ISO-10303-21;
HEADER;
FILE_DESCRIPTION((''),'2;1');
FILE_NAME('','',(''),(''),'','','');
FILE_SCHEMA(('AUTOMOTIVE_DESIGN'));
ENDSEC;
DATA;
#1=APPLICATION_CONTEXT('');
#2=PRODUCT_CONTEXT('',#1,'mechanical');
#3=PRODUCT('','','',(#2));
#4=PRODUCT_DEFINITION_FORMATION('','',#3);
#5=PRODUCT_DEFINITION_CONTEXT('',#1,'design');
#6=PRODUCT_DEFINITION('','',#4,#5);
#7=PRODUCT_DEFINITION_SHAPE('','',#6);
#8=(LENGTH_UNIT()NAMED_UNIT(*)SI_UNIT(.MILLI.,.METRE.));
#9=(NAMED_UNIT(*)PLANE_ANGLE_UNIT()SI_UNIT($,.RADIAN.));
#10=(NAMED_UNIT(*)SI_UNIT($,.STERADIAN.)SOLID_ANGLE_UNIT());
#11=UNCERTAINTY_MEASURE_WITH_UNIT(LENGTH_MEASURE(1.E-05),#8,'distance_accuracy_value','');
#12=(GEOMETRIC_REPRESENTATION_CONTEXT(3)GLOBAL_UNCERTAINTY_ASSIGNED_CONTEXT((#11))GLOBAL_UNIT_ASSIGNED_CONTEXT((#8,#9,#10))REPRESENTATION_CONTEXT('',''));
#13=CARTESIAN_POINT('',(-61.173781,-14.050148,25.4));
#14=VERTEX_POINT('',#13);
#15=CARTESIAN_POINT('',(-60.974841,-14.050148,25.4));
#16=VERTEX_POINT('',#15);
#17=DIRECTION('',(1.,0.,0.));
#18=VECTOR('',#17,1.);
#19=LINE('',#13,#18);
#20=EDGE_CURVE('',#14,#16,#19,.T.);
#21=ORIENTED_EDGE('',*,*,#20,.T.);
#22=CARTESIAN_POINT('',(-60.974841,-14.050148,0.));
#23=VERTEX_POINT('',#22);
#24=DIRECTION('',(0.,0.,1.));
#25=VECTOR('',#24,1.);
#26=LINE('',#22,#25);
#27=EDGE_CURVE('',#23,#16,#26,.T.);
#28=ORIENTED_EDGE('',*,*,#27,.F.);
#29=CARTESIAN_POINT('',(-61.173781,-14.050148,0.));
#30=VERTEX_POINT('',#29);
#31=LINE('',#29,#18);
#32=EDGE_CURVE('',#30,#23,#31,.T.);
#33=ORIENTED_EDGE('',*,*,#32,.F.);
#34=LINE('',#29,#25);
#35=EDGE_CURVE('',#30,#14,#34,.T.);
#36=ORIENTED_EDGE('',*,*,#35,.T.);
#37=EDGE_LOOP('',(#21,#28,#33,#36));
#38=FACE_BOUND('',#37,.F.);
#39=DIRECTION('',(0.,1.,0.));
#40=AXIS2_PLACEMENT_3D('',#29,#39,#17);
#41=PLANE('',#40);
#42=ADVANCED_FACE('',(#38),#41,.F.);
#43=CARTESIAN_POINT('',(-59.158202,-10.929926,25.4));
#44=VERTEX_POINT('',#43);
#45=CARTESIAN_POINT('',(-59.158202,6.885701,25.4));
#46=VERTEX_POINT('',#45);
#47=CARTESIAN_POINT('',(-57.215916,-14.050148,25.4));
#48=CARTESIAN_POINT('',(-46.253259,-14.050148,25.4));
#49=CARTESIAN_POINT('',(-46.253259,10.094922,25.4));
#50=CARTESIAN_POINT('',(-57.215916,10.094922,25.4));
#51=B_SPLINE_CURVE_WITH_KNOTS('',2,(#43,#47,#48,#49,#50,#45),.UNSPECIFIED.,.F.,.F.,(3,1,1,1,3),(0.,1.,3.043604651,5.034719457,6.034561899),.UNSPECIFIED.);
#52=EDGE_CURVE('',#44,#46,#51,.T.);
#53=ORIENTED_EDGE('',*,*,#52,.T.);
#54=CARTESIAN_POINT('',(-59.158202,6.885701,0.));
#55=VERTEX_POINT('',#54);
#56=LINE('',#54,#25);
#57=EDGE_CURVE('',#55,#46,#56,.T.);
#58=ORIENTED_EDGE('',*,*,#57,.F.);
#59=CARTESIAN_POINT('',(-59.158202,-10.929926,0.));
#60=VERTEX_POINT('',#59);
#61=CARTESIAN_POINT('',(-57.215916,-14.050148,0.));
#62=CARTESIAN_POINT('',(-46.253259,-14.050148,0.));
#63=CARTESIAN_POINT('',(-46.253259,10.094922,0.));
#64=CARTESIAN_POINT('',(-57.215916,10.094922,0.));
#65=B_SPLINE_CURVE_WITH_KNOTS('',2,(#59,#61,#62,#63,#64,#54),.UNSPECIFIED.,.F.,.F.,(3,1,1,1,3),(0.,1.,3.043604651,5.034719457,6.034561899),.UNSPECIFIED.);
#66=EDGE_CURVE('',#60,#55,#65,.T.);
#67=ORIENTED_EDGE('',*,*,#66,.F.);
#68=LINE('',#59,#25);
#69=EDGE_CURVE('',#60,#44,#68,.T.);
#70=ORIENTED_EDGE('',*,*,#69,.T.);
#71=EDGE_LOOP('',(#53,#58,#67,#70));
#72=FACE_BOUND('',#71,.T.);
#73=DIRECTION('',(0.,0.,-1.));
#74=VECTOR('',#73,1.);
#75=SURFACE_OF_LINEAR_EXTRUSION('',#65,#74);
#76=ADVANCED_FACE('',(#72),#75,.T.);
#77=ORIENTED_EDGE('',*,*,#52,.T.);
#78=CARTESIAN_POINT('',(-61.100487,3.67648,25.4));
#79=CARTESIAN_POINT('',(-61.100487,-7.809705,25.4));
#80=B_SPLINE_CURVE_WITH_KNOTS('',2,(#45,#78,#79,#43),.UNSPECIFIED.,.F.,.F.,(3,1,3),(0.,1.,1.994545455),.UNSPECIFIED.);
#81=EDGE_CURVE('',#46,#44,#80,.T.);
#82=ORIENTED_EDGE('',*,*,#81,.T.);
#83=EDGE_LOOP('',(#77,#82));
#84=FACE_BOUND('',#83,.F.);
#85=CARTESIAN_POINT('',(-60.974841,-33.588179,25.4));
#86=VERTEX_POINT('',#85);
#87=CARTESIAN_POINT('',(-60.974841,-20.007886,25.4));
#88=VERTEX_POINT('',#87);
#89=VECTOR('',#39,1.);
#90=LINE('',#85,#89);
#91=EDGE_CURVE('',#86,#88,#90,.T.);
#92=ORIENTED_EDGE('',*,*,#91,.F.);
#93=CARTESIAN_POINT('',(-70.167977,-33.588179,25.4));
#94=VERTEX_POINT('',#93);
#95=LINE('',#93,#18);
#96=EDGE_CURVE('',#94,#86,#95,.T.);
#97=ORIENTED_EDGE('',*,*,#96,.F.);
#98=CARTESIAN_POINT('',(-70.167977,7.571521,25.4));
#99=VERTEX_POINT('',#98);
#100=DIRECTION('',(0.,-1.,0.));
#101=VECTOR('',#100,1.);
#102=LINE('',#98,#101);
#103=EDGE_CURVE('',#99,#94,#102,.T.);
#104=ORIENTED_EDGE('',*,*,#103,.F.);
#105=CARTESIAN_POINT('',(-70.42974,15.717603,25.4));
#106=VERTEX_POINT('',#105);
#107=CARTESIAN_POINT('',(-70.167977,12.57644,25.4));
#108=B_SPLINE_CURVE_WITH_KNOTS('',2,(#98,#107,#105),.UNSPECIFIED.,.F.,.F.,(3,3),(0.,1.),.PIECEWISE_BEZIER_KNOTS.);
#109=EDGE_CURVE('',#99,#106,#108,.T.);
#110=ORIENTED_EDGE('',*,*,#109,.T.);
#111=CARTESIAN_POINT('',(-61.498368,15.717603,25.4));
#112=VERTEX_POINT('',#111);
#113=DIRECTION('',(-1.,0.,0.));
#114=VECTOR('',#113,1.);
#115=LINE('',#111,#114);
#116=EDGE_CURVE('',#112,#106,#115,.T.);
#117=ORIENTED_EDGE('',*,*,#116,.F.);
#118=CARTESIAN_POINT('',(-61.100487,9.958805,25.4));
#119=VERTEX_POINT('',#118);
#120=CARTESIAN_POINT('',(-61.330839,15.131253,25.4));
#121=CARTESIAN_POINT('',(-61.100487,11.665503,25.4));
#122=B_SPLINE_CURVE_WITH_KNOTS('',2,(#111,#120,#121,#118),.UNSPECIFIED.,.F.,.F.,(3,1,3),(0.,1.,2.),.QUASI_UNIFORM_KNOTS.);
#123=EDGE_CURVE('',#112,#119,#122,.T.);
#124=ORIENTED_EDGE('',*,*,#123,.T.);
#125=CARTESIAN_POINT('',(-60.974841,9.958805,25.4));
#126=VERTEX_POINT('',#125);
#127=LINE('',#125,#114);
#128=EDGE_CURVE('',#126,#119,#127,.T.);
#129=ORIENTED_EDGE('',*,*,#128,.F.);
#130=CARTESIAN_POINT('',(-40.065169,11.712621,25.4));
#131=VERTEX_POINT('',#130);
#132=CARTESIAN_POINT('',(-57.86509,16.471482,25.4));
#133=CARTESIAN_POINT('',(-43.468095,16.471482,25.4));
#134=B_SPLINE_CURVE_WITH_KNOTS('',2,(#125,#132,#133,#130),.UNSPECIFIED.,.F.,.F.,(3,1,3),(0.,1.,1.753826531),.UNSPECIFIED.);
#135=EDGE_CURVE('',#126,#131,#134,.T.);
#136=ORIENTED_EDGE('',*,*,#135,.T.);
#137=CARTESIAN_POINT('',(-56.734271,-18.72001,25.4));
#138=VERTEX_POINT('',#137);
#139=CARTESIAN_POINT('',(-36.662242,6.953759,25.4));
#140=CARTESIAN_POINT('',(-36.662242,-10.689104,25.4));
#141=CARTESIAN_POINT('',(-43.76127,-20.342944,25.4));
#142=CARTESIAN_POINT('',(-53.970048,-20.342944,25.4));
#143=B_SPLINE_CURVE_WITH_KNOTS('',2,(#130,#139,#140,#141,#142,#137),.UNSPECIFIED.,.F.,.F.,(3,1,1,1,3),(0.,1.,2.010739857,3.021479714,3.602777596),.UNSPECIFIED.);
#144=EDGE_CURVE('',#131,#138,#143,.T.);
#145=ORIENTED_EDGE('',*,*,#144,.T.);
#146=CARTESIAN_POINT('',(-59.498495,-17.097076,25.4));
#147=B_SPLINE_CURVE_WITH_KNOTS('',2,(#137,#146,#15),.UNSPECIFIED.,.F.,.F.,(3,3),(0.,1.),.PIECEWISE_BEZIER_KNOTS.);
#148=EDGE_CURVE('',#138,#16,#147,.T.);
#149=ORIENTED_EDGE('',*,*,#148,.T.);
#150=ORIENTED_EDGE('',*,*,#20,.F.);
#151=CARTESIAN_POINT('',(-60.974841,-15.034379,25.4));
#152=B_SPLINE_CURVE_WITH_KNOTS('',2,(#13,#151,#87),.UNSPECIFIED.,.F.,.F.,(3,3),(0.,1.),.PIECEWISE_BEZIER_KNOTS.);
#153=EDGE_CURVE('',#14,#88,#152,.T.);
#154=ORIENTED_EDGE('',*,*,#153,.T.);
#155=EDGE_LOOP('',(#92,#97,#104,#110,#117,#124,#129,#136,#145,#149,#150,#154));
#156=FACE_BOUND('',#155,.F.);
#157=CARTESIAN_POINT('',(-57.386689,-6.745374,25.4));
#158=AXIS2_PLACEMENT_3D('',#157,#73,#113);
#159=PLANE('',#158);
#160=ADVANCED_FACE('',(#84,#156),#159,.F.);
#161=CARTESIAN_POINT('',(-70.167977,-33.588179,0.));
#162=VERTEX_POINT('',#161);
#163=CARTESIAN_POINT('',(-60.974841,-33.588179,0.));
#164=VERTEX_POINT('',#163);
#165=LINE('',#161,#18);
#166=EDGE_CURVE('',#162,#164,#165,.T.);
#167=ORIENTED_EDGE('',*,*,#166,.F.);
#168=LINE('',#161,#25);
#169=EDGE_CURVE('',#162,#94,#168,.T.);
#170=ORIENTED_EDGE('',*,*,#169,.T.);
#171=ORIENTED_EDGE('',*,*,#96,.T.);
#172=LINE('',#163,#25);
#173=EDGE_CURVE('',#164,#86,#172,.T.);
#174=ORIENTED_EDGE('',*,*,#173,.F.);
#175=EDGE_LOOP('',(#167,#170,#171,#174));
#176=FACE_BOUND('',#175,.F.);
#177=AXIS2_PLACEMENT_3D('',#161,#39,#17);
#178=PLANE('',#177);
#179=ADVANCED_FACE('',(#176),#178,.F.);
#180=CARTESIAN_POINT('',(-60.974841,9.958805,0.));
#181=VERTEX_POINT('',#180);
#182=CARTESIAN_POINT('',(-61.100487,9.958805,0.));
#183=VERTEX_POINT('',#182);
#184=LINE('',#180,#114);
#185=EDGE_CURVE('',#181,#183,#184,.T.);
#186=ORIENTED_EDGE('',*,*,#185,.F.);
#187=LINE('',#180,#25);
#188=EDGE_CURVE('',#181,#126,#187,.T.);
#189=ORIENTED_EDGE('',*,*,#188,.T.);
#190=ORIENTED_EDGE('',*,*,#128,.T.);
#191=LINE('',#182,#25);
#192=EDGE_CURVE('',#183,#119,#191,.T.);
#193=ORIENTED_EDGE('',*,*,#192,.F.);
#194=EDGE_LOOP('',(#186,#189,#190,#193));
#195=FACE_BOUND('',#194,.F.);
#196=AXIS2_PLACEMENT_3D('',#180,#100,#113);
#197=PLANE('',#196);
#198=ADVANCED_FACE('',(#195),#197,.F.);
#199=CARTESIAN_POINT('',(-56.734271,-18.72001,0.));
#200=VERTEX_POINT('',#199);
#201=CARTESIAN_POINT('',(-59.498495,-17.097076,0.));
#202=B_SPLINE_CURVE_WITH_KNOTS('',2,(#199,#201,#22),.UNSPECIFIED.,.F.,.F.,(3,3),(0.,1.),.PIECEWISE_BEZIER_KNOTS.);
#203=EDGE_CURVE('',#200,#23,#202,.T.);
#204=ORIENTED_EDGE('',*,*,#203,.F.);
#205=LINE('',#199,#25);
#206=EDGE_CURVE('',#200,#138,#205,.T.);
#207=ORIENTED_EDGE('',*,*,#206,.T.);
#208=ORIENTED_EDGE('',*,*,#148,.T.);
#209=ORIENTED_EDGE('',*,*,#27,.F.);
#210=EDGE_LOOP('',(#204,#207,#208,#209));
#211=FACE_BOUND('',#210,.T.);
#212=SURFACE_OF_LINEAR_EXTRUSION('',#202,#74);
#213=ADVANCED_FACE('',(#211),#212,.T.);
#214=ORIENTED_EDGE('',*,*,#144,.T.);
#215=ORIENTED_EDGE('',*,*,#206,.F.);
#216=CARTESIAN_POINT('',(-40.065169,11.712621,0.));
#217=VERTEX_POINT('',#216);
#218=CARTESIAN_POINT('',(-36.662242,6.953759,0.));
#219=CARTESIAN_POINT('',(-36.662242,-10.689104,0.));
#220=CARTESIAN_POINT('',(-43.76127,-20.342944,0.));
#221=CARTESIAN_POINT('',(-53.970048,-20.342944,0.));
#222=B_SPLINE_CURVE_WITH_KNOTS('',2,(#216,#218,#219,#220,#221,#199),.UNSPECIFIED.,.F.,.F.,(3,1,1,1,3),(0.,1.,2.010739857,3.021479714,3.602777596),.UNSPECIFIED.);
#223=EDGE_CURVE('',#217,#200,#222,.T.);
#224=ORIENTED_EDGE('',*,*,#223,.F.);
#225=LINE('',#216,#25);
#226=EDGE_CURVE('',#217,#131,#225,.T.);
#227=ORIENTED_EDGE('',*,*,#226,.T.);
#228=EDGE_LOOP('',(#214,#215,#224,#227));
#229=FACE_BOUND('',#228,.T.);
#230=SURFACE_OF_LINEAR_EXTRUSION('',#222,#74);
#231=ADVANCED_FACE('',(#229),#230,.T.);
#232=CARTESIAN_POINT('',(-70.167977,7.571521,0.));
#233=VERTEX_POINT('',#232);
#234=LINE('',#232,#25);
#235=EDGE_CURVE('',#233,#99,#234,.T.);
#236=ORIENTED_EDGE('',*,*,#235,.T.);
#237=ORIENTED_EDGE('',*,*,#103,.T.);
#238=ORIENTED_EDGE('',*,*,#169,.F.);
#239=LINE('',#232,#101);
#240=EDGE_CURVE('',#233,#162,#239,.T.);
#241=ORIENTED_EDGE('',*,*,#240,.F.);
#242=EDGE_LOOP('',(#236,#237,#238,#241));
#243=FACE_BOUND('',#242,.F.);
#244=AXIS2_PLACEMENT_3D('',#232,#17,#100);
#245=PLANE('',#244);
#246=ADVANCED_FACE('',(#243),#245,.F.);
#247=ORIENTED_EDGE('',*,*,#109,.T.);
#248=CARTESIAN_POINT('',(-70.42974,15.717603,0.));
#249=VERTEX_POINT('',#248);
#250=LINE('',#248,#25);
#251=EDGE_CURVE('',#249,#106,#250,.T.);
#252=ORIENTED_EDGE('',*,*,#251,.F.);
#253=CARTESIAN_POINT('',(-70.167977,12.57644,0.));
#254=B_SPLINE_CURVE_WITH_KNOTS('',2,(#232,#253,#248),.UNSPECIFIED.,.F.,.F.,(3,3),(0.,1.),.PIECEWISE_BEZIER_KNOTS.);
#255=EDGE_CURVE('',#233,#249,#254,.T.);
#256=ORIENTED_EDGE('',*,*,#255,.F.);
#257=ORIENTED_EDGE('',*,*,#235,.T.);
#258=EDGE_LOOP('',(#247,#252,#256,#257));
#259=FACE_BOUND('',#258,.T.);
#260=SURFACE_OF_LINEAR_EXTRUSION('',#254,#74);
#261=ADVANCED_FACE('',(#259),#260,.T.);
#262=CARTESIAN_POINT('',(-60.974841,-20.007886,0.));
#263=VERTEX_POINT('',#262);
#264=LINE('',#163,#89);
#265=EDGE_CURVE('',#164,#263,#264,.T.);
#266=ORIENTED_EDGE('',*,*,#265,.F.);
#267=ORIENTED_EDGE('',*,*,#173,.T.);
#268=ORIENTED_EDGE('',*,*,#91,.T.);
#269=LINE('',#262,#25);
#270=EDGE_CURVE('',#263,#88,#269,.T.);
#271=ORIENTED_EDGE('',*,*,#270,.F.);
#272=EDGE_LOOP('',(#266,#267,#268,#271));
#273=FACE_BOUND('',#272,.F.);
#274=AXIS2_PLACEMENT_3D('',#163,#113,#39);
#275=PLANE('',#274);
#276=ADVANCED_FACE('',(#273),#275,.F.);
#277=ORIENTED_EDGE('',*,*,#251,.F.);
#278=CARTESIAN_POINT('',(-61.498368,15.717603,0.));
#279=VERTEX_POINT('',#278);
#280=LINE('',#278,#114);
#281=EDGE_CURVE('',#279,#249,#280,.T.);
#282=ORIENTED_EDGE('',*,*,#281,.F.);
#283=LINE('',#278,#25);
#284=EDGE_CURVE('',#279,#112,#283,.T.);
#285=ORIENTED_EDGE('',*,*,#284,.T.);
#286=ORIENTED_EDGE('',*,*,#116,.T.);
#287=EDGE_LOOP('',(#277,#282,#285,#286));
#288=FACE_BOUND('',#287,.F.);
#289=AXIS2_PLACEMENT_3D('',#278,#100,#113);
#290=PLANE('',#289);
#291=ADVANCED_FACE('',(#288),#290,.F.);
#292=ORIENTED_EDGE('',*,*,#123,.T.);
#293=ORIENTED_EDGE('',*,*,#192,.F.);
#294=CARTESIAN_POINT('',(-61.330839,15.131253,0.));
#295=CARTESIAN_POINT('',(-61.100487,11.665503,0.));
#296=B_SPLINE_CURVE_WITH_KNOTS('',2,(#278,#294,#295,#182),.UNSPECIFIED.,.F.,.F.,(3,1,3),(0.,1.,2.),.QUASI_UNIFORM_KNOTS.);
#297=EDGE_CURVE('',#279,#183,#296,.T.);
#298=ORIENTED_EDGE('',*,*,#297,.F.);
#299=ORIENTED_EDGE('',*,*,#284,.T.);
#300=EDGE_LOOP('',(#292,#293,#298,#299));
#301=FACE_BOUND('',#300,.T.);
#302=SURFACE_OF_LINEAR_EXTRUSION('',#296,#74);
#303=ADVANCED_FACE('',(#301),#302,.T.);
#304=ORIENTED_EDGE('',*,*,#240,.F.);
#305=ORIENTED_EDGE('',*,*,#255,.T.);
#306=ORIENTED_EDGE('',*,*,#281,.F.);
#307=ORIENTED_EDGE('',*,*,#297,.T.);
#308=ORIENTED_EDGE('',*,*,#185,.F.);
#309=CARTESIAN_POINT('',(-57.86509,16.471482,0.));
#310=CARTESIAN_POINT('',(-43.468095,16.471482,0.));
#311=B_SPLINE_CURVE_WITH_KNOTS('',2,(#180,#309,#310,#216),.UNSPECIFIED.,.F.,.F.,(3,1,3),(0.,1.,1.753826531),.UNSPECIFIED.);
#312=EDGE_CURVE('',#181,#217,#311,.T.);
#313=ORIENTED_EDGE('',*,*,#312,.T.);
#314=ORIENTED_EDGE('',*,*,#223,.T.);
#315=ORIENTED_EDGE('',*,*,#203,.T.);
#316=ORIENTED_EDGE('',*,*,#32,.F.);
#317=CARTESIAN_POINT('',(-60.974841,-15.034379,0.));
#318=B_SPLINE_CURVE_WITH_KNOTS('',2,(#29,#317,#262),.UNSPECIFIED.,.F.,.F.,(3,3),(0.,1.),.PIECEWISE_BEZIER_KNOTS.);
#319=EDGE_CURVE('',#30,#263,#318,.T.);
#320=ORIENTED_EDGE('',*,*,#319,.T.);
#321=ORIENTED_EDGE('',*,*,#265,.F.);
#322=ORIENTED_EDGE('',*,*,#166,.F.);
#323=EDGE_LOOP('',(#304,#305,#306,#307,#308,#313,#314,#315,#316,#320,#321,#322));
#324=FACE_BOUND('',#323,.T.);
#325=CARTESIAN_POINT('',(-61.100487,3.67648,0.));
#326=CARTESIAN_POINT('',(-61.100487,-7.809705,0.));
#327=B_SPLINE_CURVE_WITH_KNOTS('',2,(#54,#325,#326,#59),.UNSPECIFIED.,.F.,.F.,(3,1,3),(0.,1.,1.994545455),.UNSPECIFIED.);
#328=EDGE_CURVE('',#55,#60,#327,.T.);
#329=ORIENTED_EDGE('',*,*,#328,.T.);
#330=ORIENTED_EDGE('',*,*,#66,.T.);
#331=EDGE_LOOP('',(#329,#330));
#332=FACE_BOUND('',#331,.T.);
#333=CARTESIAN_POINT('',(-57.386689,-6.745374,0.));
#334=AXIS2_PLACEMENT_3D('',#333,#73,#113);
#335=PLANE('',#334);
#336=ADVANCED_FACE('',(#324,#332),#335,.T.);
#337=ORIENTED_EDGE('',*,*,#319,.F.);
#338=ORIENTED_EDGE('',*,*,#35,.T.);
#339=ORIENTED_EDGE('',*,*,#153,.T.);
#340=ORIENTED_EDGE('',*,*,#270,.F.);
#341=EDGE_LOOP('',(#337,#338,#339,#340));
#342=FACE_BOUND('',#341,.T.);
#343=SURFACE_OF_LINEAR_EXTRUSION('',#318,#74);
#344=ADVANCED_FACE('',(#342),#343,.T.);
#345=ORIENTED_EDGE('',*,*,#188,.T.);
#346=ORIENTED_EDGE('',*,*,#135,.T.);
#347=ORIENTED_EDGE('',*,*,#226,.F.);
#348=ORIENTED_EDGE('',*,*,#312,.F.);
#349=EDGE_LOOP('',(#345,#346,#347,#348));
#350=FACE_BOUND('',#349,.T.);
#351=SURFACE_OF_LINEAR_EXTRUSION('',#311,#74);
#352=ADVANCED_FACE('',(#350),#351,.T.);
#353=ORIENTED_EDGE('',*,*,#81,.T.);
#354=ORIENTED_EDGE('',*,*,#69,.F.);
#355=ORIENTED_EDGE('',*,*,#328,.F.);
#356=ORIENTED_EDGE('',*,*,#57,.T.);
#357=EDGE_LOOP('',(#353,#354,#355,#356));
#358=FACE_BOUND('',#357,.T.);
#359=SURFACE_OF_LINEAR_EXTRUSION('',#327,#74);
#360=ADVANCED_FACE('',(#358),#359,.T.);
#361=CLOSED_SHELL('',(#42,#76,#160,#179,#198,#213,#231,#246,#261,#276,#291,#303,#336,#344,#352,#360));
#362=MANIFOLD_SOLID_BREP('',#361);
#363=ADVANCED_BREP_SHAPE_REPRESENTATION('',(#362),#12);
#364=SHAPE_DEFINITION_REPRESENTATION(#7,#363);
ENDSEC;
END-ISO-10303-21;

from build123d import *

# Parameters (mm, degrees)
F1_DEPTH = 25.4


with BuildPart() as f1:
    # F0 (on Top) → F1 (new body)
    with BuildSketch(Plane.XY):
        with BuildLine():
            add(Edge.make_bspline(
                [(-36.6622424432, -1.8205549519), (-36.6622424432, -10.6891040171), (-40.2117561777, -15.5160238743)],
                knots=[0, 0, 0, 1, 1, 1], degree=2))
            add(Edge.make_bspline(
                [(-40.0651685898, 11.7126205696), (-36.6622424432, 6.9537592353), (-36.6622424432, -1.8205549519)],
                knots=[0, 0, 0, 1, 1, 1], degree=2))
            add(Edge.make_bspline(
                [(-49.6561850523, 16.4714819039), (-43.4680947365, 16.4714819039), (-40.0651685898, 11.7126205696)],
                knots=[0, 0, 0, 1, 1, 1], degree=2))
            add(Edge.make_bspline(
                [(-60.974840943, 9.9588047863), (-57.8650899721, 16.4714819039), (-49.6561850523, 16.4714819039)],
                knots=[0, 0, 0, 1, 1, 1], degree=2))
            Line((-60.974840943, 9.9588047863), (-61.1004874469, 9.9588047863))
            add(Edge.make_bspline(
                [(-61.2156634088, 13.3983778299), (-61.1004874469, 11.6655031306), (-61.1004874469, 9.9588047863)],
                knots=[0, 0, 0, 1, 1, 1], degree=2))
            add(Edge.make_bspline(
                [(-61.4983680425, 15.7176028806), (-61.3308393707, 15.1312525292), (-61.2156634088, 13.3983778299)],
                knots=[0, 0, 0, 1, 1, 1], degree=2))
            Line((-61.4983680425, 15.7176028806), (-70.4297403596, 15.7176028806))
            add(Edge.make_bspline(
                [(-70.1679768099, 7.5715212127), (-70.1679768099, 12.5764402837), (-70.4297403596, 15.7176028806)],
                knots=[0, 0, 0, 1, 1, 1], degree=2))
            Line((-70.1679768099, 7.5715212127), (-70.1679768099, -33.5881793483))
            Line((-70.1679768099, -33.5881793483), (-60.974840943, -33.5881793483))
            Line((-60.974840943, -33.5881793483), (-60.974840943, -20.0078863879))
            add(Edge.make_bspline(
                [(-61.1737812408, -14.0501479958), (-60.974840943, -15.0343789428), (-60.974840943, -20.0078863879)],
                knots=[0, 0, 0, 1, 1, 1], degree=2))
            Line((-61.1737812408, -14.0501479958), (-60.974840943, -14.0501479958))
            add(Edge.make_bspline(
                [(-56.7342714373, -18.7200097231), (-59.4984945225, -17.0970757147), (-60.974840943, -14.0501479958)],
                knots=[0, 0, 0, 1, 1, 1], degree=2))
            add(Edge.make_bspline(
                [(-50.2425354037, -20.3429437315), (-53.970048352, -20.3429437315), (-56.7342714373, -18.7200097231)],
                knots=[0, 0, 0, 1, 1, 1], degree=2))
            add(Edge.make_bspline(
                [(-40.2117561777, -15.5160238743), (-43.7612699122, -20.3429437315), (-50.2425354037, -20.3429437315)],
                knots=[0, 0, 0, 1, 1, 1], degree=2))
        make_face()
        with BuildLine():
            add(Edge.make_bspline(
                [(-46.2532589057, -1.8205549519), (-46.2532589057, 10.0949218322), (-53.5512266724, 10.0949218322)],
                knots=[0, 0, 0, 1, 1, 1], degree=2))
            add(Edge.make_bspline(
                [(-53.6140499244, -14.0501479958), (-46.2532589057, -14.0501479958), (-46.2532589057, -1.8205549519)],
                knots=[0, 0, 0, 1, 1, 1], degree=2))
            add(Edge.make_bspline(
                [(-59.1582019078, -10.9299264829), (-57.2159163688, -14.0501479958), (-53.6140499244, -14.0501479958)],
                knots=[0, 0, 0, 1, 1, 1], degree=2))
            add(Edge.make_bspline(
                [(-61.1004874469, -2.0823185017), (-61.1004874469, -7.80970497), (-59.1582019078, -10.9299264829)],
                knots=[0, 0, 0, 1, 1, 1], degree=2))
            add(Edge.make_bspline(
                [(-59.1582019078, 6.8857007124), (-61.1004874469, 3.6764795926), (-61.1004874469, -2.0823185017)],
                knots=[0, 0, 0, 1, 1, 1], degree=2))
            add(Edge.make_bspline(
                [(-53.5512266724, 10.0949218322), (-57.2159163688, 10.0949218322), (-59.1582019078, 6.8857007124)],
                knots=[0, 0, 0, 1, 1, 1], degree=2))
        make_face(mode=Mode.SUBTRACT)
    extrude(amount=F1_DEPTH)


solid = f1.part
